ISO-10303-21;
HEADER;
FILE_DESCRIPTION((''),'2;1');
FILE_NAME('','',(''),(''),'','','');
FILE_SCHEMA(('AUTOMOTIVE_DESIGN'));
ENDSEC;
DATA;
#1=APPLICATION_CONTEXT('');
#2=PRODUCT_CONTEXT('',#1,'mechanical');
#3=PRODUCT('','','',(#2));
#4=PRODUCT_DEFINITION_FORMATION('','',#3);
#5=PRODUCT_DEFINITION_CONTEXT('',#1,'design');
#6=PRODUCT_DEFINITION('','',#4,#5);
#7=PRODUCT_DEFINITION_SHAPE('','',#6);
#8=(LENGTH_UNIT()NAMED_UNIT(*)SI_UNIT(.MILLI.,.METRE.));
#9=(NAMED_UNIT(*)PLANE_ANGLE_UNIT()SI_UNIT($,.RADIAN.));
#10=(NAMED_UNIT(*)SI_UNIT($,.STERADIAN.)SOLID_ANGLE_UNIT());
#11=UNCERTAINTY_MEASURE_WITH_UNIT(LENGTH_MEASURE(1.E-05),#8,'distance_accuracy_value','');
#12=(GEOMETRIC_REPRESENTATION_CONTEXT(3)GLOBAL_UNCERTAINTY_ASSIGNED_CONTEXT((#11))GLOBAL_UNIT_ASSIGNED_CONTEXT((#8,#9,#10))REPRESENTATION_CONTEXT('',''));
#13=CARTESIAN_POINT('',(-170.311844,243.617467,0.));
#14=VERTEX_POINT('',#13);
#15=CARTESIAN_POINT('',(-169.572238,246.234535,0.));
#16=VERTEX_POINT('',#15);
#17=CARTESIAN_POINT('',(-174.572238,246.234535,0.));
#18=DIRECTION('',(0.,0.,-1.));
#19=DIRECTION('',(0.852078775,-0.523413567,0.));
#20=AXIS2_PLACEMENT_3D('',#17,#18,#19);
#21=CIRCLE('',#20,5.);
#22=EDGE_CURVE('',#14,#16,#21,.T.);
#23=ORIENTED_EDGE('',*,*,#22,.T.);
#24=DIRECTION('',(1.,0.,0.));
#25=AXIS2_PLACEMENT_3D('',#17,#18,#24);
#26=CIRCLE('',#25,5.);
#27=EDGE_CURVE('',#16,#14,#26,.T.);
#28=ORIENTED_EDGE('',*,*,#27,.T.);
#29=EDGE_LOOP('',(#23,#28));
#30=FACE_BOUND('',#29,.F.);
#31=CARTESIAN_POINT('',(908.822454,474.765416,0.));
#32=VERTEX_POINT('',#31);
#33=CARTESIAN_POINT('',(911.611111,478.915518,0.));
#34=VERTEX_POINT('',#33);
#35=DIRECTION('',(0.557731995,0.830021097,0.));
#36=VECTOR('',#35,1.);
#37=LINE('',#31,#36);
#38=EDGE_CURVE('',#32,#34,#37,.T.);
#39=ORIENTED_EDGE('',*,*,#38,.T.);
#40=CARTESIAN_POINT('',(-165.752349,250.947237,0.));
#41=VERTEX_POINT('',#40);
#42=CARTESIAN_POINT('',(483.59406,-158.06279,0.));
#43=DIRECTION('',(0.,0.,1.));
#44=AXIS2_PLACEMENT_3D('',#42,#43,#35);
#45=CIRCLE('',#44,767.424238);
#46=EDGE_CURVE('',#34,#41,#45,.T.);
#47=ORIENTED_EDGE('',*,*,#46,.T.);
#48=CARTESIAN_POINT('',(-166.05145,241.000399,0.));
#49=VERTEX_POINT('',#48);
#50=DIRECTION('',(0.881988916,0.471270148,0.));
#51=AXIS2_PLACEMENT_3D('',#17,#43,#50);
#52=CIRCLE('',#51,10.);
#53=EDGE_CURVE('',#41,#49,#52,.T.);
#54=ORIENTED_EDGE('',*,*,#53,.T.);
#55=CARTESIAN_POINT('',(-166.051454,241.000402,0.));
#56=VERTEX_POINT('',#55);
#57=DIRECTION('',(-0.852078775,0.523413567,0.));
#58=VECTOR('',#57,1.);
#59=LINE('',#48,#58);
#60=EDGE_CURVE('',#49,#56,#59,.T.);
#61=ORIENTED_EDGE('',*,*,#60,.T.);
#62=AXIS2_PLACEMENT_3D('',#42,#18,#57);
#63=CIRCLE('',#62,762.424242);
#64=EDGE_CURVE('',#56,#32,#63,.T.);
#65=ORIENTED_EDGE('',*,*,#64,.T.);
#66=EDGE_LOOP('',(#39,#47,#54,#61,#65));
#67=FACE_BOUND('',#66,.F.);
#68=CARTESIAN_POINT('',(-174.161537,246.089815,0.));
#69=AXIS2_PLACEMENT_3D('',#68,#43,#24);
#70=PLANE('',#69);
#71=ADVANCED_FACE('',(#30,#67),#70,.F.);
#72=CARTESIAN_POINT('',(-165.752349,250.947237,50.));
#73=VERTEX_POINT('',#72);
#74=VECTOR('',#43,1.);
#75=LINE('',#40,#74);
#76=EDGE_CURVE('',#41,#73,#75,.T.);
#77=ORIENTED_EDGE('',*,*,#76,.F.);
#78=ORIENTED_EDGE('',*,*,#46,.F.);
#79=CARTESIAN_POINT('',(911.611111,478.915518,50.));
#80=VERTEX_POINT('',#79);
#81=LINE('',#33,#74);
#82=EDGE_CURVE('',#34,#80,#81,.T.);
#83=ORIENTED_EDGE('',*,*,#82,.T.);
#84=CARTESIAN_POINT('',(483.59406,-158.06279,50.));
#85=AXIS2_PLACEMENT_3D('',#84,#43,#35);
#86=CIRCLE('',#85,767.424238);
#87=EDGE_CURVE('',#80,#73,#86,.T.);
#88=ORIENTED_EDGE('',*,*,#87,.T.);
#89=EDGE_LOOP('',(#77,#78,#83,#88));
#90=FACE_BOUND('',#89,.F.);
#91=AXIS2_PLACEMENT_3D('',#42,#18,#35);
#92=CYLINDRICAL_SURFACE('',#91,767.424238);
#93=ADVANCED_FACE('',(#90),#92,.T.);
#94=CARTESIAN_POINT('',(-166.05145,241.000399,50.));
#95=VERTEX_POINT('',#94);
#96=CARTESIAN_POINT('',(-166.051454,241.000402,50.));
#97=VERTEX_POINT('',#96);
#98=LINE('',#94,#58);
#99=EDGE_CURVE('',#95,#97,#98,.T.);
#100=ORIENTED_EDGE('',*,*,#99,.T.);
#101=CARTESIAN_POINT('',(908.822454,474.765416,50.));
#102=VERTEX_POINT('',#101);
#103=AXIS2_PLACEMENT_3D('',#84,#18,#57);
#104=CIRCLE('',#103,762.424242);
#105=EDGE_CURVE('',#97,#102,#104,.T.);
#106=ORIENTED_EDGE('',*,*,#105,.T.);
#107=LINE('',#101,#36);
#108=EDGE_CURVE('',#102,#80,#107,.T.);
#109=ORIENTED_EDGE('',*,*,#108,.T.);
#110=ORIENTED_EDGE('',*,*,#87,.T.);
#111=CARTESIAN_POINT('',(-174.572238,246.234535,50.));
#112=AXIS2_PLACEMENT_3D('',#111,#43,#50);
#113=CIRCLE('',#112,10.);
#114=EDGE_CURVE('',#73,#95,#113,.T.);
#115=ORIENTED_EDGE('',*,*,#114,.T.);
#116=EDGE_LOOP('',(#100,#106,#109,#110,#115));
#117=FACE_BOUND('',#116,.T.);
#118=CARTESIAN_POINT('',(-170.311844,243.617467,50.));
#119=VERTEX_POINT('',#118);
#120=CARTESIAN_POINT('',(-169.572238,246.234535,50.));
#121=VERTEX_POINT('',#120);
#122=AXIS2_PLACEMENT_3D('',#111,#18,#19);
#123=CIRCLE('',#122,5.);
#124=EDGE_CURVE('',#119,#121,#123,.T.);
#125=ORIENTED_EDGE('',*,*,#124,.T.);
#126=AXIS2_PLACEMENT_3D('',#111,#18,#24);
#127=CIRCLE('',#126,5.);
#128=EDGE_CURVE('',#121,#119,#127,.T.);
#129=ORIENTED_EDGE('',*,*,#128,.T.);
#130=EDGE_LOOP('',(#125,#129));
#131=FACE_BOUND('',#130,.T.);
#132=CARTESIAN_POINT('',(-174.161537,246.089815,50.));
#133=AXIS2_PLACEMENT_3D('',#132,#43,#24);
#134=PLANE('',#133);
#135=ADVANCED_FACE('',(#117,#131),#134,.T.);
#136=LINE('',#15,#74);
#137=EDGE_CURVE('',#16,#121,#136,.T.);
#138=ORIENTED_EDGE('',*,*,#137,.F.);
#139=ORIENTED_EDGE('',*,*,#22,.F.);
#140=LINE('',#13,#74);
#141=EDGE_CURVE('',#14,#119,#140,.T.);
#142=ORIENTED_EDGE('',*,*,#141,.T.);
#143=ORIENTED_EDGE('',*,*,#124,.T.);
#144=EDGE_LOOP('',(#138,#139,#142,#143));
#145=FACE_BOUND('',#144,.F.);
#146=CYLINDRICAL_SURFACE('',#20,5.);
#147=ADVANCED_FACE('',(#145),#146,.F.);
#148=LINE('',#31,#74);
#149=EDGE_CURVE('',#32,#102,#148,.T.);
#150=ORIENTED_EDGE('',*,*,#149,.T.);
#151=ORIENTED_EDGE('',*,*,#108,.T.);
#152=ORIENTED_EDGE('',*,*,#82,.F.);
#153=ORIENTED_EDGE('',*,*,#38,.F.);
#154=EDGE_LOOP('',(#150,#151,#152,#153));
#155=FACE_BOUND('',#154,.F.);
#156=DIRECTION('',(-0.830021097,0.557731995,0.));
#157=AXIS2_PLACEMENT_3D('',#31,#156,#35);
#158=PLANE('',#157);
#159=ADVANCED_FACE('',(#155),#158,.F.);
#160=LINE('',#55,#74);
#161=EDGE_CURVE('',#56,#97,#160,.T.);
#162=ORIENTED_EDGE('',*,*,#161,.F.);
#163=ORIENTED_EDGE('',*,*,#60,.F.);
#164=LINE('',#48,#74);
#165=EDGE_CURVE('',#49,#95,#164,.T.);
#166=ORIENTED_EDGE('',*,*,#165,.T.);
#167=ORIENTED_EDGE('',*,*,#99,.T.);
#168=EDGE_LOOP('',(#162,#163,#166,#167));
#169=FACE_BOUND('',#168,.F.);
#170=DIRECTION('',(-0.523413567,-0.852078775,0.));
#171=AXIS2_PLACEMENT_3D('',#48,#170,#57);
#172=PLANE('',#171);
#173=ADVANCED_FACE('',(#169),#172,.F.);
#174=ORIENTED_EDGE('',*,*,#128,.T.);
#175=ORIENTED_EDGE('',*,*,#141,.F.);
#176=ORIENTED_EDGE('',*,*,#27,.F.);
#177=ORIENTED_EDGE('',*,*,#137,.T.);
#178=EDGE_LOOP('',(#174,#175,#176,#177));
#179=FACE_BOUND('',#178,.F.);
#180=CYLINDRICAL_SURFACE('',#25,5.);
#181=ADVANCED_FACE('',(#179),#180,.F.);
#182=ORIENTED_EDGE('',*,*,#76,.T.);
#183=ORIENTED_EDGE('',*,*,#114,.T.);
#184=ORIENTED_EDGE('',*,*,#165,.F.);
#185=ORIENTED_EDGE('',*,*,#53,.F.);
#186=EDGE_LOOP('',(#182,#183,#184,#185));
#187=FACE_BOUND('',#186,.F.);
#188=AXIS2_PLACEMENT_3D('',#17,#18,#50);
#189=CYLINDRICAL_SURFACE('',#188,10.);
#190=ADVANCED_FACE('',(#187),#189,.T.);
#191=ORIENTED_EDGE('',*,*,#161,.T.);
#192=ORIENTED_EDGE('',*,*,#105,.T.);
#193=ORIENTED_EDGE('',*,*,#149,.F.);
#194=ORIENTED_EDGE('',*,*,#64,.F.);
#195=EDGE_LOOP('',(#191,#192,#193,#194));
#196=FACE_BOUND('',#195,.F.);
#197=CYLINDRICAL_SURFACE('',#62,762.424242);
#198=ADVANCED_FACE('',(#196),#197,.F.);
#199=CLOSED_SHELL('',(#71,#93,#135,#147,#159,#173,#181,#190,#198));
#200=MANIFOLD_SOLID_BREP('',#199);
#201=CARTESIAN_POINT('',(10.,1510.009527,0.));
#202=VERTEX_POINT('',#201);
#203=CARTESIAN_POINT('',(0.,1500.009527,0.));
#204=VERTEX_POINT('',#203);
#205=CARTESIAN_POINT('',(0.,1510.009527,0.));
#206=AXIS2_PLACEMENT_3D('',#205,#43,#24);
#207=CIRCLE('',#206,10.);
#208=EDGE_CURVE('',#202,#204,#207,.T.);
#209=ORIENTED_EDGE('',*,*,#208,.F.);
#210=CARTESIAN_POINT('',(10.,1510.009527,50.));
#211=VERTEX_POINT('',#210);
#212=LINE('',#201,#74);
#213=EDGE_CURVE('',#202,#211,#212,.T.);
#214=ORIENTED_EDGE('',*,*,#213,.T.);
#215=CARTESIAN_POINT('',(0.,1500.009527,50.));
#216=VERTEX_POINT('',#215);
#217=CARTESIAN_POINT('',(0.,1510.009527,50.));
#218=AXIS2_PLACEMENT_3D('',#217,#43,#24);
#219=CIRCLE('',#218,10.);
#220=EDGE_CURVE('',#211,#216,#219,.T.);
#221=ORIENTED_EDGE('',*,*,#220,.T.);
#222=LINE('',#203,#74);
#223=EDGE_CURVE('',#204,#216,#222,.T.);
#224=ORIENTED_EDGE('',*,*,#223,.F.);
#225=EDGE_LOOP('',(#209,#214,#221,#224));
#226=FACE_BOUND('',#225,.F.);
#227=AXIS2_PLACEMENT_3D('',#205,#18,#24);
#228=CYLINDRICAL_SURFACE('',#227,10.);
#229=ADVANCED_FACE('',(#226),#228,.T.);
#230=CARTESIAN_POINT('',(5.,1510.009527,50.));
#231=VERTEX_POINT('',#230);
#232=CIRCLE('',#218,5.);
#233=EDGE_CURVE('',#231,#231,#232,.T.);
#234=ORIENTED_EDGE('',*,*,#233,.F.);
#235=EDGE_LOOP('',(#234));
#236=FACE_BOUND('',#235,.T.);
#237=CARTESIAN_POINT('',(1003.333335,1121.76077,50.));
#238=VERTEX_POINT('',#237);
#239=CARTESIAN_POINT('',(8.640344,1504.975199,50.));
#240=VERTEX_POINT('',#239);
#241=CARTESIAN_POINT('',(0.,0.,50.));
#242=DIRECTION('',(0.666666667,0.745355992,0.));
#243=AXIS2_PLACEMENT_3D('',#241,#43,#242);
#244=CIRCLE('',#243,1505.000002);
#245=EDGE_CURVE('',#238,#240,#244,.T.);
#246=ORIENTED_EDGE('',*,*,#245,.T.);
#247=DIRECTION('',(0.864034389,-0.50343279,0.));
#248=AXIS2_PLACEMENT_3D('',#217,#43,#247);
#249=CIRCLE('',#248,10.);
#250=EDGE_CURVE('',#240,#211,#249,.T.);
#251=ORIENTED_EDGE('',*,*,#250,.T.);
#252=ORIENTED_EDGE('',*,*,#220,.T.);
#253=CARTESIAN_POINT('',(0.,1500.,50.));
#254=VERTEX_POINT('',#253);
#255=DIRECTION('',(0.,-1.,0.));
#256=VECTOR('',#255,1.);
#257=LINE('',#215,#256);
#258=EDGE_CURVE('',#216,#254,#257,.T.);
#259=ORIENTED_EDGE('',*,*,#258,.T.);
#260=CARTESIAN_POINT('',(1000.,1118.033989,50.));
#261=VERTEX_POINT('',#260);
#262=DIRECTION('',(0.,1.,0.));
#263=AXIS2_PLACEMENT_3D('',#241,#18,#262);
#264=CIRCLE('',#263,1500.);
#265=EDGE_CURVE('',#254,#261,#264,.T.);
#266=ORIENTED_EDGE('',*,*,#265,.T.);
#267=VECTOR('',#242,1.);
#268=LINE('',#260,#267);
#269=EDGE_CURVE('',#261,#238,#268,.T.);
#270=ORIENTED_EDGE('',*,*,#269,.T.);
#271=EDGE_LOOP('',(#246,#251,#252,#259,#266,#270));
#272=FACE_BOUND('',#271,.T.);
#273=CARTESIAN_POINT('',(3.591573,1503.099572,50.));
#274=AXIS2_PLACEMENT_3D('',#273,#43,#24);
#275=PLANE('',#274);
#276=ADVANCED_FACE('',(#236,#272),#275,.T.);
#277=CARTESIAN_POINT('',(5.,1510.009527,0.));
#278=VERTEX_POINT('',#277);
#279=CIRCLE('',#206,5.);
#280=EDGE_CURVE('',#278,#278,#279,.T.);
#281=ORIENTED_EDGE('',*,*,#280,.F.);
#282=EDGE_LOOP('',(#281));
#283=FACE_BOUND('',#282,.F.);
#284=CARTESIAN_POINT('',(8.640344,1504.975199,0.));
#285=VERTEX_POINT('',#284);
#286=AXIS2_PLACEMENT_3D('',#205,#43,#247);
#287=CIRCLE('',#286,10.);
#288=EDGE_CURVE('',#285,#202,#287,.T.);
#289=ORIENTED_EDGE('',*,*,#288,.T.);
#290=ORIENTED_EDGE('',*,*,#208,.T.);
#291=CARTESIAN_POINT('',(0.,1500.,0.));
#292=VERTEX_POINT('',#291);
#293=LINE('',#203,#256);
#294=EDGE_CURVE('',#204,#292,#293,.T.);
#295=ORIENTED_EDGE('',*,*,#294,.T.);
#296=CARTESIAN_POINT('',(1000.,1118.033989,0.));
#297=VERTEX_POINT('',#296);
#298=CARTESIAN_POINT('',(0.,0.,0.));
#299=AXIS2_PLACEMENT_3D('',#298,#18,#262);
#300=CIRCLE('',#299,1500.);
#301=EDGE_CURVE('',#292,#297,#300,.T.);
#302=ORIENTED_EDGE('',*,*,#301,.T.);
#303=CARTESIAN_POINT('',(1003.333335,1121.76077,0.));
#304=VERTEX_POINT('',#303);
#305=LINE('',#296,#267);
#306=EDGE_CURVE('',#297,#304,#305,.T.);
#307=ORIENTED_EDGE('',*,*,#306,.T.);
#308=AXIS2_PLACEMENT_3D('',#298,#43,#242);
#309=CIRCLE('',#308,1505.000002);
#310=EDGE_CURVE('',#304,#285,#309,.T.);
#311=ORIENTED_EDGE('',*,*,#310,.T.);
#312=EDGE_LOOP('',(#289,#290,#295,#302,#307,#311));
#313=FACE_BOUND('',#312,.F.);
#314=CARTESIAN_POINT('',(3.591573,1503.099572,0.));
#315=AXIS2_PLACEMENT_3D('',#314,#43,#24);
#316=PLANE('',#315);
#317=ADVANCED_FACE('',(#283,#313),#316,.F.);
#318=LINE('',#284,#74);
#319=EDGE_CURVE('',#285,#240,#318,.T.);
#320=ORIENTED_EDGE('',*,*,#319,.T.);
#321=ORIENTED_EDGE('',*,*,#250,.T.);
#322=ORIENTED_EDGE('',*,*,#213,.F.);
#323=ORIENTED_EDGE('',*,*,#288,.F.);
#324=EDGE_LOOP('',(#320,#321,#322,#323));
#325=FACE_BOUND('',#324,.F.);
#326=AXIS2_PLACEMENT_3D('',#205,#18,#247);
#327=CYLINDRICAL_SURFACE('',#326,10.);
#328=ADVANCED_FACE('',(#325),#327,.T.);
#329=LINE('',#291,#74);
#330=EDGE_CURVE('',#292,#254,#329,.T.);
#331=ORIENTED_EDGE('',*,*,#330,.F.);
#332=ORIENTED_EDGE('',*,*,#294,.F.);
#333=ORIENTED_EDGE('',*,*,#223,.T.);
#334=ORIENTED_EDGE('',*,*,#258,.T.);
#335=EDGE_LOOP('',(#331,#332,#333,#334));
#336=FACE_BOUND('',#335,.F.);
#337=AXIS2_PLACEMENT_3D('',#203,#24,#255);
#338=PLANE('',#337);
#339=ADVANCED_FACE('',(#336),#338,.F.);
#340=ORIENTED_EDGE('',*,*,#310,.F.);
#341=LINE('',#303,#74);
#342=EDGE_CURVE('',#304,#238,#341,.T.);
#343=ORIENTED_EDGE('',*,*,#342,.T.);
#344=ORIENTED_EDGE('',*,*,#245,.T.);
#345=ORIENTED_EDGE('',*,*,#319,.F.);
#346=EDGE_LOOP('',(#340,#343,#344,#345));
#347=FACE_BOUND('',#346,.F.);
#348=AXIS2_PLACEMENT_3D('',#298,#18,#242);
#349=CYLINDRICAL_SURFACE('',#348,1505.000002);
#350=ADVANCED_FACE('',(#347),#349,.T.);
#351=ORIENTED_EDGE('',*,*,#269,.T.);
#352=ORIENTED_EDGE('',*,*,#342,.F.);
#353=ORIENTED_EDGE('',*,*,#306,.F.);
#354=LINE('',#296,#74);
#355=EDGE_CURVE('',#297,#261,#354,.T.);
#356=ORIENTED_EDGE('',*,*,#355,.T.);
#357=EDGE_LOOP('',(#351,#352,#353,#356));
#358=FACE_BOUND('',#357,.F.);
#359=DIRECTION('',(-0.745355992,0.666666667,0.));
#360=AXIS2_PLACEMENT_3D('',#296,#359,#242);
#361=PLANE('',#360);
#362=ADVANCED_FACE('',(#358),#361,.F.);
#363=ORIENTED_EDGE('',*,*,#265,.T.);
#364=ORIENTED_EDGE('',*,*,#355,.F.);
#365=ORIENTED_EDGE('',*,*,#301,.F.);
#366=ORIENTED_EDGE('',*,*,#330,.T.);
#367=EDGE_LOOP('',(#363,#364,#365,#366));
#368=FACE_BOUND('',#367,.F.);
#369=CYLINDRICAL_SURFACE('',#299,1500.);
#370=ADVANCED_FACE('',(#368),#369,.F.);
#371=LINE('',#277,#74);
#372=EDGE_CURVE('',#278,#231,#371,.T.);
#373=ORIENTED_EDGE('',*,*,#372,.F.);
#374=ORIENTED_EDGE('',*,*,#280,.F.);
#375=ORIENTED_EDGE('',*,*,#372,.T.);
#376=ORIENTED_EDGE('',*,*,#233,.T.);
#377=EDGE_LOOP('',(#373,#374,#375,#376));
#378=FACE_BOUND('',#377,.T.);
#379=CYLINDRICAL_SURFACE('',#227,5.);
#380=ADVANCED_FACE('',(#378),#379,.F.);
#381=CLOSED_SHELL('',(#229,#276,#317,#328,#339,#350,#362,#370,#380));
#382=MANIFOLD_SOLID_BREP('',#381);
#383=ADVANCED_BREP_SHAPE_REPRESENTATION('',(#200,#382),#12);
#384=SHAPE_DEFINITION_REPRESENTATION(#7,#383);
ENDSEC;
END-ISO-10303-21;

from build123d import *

# Parameters (mm, degrees)
F0_R     = 5
F1_DEPTH = 50
F3_DEPTH = 50


# Not quite as in the source:
# - ends of sketch curves that miss each other by under 0.0002 mm in the source are joined


with BuildPart() as f1:
    # F0 (on Top) → F1 (new body)
    with BuildSketch(Plane.XY):
        with BuildLine():
            Line((0, 1505.0000020167), (0, 1500.0095272064))
            ThreePointArc((0, 1500.0095272064), (4.9828064884, 1501.3393692206), (8.6403438934, 1504.9751993065))
            ThreePointArc((8.6403438934, 1504.9751993065), (4.3201897461, 1504.9938013264), (0, 1505.0000020167))
        make_face()
        with BuildLine():
            ThreePointArc((10, 1510.0095272064), (-7.0710678119, 1517.0805950183), (0, 1500.0095272064))
            Line((0, 1500.0095272064), (0, 1505.0000020167))
            ThreePointArc((0, 1505.0000020167), (4.3201897461, 1504.9938013264), (8.6403438934, 1504.9751993065))
            ThreePointArc((8.6403438934, 1504.9751993065), (9.654103763, 1507.4021759579), (10, 1510.0095272064))
        make_face()
        with Locations((0, 1510.0095272064)):
            Circle(F0_R, mode=Mode.SUBTRACT)
        with BuildLine():
            ThreePointArc((0, 1500), (535.2331346596, 1401.2585384441), (1000, 1118.0339887499))
            Line((1000, 1118.0339887499), (1003.3333346778, 1121.7607702155))
            ThreePointArc((1003.3333346778, 1121.7607702155), (541.0508351311, 1404.3820704759), (8.6403438934, 1504.9751993065))
            ThreePointArc((8.6403438934, 1504.9751993065), (4.9828064884, 1501.3393692206), (0, 1500.0095272064))
            Line((0, 1500.0095272064), (0, 1500))
        make_face()
    extrude(amount=F1_DEPTH)


with BuildPart() as f3:
    # F2 (on Top) → F3 (new body)
    with BuildSketch(Plane.XY):
        with BuildLine():
            ThreePointArc((-165.7523488067, 250.9472365606), (-184.5677200008, 246.5350992369), (-166.051450216, 241.0003994084))
            Line((-166.051450216, 241.0003994084), (-170.3118440891, 243.6174672421))
            ThreePointArc((-170.3118440891, 243.6174672421), (-168.0424024134, 247.2887627444), (-165.7523488067, 250.9472365606))
        make_face()
        with BuildLine():
            ThreePointArc((-169.5722379622, 246.2345350757), (-169.7606909466, 244.8747500496), (-170.3118440891, 243.6174672421))
            ThreePointArc((-170.3118440891, 243.6174672421), (-179.3837849777, 247.5943201019), (-169.5722379622, 246.2345350757))
        make_face(mode=Mode.SUBTRACT)
        with BuildLine():
            Line((-170.3118440891, 243.6174672421), (-166.051454279, 241.0004019042))
            ThreePointArc((-166.051454279, 241.0004019042), (-164.9491439311, 243.5149650235), (-164.5722379622, 246.2345350757))
            ThreePointArc((-164.5722379622, 246.2345350757), (-164.8717510787, 248.6636407183), (-165.7523488067, 250.9472365606))
            ThreePointArc((-165.7523488067, 250.9472365606), (-168.0424024134, 247.2887627444), (-170.3118440891, 243.6174672421))
        make_face()
        with BuildLine():
            ThreePointArc((-166.051454279, 241.0004019042), (321.56850198, 586.9462325741), (908.8224537655, 474.7654159781))
            Line((908.8224537655, 474.7654159781), (911.6111110814, 478.9155175059))
            ThreePointArc((911.6111110814, 478.9155175059), (324.7260159117, 592.7373863711), (-165.7523488067, 250.9472365606))
            ThreePointArc((-165.7523488067, 250.9472365606), (-164.8717510787, 248.6636407183), (-164.5722379622, 246.2345350757))
            ThreePointArc((-164.5722379622, 246.2345350757), (-164.9491439311, 243.5149650235), (-166.051454279, 241.0004019042))
        make_face()
    extrude(amount=F3_DEPTH)


solid = Compound([f1.part, f3.part])
